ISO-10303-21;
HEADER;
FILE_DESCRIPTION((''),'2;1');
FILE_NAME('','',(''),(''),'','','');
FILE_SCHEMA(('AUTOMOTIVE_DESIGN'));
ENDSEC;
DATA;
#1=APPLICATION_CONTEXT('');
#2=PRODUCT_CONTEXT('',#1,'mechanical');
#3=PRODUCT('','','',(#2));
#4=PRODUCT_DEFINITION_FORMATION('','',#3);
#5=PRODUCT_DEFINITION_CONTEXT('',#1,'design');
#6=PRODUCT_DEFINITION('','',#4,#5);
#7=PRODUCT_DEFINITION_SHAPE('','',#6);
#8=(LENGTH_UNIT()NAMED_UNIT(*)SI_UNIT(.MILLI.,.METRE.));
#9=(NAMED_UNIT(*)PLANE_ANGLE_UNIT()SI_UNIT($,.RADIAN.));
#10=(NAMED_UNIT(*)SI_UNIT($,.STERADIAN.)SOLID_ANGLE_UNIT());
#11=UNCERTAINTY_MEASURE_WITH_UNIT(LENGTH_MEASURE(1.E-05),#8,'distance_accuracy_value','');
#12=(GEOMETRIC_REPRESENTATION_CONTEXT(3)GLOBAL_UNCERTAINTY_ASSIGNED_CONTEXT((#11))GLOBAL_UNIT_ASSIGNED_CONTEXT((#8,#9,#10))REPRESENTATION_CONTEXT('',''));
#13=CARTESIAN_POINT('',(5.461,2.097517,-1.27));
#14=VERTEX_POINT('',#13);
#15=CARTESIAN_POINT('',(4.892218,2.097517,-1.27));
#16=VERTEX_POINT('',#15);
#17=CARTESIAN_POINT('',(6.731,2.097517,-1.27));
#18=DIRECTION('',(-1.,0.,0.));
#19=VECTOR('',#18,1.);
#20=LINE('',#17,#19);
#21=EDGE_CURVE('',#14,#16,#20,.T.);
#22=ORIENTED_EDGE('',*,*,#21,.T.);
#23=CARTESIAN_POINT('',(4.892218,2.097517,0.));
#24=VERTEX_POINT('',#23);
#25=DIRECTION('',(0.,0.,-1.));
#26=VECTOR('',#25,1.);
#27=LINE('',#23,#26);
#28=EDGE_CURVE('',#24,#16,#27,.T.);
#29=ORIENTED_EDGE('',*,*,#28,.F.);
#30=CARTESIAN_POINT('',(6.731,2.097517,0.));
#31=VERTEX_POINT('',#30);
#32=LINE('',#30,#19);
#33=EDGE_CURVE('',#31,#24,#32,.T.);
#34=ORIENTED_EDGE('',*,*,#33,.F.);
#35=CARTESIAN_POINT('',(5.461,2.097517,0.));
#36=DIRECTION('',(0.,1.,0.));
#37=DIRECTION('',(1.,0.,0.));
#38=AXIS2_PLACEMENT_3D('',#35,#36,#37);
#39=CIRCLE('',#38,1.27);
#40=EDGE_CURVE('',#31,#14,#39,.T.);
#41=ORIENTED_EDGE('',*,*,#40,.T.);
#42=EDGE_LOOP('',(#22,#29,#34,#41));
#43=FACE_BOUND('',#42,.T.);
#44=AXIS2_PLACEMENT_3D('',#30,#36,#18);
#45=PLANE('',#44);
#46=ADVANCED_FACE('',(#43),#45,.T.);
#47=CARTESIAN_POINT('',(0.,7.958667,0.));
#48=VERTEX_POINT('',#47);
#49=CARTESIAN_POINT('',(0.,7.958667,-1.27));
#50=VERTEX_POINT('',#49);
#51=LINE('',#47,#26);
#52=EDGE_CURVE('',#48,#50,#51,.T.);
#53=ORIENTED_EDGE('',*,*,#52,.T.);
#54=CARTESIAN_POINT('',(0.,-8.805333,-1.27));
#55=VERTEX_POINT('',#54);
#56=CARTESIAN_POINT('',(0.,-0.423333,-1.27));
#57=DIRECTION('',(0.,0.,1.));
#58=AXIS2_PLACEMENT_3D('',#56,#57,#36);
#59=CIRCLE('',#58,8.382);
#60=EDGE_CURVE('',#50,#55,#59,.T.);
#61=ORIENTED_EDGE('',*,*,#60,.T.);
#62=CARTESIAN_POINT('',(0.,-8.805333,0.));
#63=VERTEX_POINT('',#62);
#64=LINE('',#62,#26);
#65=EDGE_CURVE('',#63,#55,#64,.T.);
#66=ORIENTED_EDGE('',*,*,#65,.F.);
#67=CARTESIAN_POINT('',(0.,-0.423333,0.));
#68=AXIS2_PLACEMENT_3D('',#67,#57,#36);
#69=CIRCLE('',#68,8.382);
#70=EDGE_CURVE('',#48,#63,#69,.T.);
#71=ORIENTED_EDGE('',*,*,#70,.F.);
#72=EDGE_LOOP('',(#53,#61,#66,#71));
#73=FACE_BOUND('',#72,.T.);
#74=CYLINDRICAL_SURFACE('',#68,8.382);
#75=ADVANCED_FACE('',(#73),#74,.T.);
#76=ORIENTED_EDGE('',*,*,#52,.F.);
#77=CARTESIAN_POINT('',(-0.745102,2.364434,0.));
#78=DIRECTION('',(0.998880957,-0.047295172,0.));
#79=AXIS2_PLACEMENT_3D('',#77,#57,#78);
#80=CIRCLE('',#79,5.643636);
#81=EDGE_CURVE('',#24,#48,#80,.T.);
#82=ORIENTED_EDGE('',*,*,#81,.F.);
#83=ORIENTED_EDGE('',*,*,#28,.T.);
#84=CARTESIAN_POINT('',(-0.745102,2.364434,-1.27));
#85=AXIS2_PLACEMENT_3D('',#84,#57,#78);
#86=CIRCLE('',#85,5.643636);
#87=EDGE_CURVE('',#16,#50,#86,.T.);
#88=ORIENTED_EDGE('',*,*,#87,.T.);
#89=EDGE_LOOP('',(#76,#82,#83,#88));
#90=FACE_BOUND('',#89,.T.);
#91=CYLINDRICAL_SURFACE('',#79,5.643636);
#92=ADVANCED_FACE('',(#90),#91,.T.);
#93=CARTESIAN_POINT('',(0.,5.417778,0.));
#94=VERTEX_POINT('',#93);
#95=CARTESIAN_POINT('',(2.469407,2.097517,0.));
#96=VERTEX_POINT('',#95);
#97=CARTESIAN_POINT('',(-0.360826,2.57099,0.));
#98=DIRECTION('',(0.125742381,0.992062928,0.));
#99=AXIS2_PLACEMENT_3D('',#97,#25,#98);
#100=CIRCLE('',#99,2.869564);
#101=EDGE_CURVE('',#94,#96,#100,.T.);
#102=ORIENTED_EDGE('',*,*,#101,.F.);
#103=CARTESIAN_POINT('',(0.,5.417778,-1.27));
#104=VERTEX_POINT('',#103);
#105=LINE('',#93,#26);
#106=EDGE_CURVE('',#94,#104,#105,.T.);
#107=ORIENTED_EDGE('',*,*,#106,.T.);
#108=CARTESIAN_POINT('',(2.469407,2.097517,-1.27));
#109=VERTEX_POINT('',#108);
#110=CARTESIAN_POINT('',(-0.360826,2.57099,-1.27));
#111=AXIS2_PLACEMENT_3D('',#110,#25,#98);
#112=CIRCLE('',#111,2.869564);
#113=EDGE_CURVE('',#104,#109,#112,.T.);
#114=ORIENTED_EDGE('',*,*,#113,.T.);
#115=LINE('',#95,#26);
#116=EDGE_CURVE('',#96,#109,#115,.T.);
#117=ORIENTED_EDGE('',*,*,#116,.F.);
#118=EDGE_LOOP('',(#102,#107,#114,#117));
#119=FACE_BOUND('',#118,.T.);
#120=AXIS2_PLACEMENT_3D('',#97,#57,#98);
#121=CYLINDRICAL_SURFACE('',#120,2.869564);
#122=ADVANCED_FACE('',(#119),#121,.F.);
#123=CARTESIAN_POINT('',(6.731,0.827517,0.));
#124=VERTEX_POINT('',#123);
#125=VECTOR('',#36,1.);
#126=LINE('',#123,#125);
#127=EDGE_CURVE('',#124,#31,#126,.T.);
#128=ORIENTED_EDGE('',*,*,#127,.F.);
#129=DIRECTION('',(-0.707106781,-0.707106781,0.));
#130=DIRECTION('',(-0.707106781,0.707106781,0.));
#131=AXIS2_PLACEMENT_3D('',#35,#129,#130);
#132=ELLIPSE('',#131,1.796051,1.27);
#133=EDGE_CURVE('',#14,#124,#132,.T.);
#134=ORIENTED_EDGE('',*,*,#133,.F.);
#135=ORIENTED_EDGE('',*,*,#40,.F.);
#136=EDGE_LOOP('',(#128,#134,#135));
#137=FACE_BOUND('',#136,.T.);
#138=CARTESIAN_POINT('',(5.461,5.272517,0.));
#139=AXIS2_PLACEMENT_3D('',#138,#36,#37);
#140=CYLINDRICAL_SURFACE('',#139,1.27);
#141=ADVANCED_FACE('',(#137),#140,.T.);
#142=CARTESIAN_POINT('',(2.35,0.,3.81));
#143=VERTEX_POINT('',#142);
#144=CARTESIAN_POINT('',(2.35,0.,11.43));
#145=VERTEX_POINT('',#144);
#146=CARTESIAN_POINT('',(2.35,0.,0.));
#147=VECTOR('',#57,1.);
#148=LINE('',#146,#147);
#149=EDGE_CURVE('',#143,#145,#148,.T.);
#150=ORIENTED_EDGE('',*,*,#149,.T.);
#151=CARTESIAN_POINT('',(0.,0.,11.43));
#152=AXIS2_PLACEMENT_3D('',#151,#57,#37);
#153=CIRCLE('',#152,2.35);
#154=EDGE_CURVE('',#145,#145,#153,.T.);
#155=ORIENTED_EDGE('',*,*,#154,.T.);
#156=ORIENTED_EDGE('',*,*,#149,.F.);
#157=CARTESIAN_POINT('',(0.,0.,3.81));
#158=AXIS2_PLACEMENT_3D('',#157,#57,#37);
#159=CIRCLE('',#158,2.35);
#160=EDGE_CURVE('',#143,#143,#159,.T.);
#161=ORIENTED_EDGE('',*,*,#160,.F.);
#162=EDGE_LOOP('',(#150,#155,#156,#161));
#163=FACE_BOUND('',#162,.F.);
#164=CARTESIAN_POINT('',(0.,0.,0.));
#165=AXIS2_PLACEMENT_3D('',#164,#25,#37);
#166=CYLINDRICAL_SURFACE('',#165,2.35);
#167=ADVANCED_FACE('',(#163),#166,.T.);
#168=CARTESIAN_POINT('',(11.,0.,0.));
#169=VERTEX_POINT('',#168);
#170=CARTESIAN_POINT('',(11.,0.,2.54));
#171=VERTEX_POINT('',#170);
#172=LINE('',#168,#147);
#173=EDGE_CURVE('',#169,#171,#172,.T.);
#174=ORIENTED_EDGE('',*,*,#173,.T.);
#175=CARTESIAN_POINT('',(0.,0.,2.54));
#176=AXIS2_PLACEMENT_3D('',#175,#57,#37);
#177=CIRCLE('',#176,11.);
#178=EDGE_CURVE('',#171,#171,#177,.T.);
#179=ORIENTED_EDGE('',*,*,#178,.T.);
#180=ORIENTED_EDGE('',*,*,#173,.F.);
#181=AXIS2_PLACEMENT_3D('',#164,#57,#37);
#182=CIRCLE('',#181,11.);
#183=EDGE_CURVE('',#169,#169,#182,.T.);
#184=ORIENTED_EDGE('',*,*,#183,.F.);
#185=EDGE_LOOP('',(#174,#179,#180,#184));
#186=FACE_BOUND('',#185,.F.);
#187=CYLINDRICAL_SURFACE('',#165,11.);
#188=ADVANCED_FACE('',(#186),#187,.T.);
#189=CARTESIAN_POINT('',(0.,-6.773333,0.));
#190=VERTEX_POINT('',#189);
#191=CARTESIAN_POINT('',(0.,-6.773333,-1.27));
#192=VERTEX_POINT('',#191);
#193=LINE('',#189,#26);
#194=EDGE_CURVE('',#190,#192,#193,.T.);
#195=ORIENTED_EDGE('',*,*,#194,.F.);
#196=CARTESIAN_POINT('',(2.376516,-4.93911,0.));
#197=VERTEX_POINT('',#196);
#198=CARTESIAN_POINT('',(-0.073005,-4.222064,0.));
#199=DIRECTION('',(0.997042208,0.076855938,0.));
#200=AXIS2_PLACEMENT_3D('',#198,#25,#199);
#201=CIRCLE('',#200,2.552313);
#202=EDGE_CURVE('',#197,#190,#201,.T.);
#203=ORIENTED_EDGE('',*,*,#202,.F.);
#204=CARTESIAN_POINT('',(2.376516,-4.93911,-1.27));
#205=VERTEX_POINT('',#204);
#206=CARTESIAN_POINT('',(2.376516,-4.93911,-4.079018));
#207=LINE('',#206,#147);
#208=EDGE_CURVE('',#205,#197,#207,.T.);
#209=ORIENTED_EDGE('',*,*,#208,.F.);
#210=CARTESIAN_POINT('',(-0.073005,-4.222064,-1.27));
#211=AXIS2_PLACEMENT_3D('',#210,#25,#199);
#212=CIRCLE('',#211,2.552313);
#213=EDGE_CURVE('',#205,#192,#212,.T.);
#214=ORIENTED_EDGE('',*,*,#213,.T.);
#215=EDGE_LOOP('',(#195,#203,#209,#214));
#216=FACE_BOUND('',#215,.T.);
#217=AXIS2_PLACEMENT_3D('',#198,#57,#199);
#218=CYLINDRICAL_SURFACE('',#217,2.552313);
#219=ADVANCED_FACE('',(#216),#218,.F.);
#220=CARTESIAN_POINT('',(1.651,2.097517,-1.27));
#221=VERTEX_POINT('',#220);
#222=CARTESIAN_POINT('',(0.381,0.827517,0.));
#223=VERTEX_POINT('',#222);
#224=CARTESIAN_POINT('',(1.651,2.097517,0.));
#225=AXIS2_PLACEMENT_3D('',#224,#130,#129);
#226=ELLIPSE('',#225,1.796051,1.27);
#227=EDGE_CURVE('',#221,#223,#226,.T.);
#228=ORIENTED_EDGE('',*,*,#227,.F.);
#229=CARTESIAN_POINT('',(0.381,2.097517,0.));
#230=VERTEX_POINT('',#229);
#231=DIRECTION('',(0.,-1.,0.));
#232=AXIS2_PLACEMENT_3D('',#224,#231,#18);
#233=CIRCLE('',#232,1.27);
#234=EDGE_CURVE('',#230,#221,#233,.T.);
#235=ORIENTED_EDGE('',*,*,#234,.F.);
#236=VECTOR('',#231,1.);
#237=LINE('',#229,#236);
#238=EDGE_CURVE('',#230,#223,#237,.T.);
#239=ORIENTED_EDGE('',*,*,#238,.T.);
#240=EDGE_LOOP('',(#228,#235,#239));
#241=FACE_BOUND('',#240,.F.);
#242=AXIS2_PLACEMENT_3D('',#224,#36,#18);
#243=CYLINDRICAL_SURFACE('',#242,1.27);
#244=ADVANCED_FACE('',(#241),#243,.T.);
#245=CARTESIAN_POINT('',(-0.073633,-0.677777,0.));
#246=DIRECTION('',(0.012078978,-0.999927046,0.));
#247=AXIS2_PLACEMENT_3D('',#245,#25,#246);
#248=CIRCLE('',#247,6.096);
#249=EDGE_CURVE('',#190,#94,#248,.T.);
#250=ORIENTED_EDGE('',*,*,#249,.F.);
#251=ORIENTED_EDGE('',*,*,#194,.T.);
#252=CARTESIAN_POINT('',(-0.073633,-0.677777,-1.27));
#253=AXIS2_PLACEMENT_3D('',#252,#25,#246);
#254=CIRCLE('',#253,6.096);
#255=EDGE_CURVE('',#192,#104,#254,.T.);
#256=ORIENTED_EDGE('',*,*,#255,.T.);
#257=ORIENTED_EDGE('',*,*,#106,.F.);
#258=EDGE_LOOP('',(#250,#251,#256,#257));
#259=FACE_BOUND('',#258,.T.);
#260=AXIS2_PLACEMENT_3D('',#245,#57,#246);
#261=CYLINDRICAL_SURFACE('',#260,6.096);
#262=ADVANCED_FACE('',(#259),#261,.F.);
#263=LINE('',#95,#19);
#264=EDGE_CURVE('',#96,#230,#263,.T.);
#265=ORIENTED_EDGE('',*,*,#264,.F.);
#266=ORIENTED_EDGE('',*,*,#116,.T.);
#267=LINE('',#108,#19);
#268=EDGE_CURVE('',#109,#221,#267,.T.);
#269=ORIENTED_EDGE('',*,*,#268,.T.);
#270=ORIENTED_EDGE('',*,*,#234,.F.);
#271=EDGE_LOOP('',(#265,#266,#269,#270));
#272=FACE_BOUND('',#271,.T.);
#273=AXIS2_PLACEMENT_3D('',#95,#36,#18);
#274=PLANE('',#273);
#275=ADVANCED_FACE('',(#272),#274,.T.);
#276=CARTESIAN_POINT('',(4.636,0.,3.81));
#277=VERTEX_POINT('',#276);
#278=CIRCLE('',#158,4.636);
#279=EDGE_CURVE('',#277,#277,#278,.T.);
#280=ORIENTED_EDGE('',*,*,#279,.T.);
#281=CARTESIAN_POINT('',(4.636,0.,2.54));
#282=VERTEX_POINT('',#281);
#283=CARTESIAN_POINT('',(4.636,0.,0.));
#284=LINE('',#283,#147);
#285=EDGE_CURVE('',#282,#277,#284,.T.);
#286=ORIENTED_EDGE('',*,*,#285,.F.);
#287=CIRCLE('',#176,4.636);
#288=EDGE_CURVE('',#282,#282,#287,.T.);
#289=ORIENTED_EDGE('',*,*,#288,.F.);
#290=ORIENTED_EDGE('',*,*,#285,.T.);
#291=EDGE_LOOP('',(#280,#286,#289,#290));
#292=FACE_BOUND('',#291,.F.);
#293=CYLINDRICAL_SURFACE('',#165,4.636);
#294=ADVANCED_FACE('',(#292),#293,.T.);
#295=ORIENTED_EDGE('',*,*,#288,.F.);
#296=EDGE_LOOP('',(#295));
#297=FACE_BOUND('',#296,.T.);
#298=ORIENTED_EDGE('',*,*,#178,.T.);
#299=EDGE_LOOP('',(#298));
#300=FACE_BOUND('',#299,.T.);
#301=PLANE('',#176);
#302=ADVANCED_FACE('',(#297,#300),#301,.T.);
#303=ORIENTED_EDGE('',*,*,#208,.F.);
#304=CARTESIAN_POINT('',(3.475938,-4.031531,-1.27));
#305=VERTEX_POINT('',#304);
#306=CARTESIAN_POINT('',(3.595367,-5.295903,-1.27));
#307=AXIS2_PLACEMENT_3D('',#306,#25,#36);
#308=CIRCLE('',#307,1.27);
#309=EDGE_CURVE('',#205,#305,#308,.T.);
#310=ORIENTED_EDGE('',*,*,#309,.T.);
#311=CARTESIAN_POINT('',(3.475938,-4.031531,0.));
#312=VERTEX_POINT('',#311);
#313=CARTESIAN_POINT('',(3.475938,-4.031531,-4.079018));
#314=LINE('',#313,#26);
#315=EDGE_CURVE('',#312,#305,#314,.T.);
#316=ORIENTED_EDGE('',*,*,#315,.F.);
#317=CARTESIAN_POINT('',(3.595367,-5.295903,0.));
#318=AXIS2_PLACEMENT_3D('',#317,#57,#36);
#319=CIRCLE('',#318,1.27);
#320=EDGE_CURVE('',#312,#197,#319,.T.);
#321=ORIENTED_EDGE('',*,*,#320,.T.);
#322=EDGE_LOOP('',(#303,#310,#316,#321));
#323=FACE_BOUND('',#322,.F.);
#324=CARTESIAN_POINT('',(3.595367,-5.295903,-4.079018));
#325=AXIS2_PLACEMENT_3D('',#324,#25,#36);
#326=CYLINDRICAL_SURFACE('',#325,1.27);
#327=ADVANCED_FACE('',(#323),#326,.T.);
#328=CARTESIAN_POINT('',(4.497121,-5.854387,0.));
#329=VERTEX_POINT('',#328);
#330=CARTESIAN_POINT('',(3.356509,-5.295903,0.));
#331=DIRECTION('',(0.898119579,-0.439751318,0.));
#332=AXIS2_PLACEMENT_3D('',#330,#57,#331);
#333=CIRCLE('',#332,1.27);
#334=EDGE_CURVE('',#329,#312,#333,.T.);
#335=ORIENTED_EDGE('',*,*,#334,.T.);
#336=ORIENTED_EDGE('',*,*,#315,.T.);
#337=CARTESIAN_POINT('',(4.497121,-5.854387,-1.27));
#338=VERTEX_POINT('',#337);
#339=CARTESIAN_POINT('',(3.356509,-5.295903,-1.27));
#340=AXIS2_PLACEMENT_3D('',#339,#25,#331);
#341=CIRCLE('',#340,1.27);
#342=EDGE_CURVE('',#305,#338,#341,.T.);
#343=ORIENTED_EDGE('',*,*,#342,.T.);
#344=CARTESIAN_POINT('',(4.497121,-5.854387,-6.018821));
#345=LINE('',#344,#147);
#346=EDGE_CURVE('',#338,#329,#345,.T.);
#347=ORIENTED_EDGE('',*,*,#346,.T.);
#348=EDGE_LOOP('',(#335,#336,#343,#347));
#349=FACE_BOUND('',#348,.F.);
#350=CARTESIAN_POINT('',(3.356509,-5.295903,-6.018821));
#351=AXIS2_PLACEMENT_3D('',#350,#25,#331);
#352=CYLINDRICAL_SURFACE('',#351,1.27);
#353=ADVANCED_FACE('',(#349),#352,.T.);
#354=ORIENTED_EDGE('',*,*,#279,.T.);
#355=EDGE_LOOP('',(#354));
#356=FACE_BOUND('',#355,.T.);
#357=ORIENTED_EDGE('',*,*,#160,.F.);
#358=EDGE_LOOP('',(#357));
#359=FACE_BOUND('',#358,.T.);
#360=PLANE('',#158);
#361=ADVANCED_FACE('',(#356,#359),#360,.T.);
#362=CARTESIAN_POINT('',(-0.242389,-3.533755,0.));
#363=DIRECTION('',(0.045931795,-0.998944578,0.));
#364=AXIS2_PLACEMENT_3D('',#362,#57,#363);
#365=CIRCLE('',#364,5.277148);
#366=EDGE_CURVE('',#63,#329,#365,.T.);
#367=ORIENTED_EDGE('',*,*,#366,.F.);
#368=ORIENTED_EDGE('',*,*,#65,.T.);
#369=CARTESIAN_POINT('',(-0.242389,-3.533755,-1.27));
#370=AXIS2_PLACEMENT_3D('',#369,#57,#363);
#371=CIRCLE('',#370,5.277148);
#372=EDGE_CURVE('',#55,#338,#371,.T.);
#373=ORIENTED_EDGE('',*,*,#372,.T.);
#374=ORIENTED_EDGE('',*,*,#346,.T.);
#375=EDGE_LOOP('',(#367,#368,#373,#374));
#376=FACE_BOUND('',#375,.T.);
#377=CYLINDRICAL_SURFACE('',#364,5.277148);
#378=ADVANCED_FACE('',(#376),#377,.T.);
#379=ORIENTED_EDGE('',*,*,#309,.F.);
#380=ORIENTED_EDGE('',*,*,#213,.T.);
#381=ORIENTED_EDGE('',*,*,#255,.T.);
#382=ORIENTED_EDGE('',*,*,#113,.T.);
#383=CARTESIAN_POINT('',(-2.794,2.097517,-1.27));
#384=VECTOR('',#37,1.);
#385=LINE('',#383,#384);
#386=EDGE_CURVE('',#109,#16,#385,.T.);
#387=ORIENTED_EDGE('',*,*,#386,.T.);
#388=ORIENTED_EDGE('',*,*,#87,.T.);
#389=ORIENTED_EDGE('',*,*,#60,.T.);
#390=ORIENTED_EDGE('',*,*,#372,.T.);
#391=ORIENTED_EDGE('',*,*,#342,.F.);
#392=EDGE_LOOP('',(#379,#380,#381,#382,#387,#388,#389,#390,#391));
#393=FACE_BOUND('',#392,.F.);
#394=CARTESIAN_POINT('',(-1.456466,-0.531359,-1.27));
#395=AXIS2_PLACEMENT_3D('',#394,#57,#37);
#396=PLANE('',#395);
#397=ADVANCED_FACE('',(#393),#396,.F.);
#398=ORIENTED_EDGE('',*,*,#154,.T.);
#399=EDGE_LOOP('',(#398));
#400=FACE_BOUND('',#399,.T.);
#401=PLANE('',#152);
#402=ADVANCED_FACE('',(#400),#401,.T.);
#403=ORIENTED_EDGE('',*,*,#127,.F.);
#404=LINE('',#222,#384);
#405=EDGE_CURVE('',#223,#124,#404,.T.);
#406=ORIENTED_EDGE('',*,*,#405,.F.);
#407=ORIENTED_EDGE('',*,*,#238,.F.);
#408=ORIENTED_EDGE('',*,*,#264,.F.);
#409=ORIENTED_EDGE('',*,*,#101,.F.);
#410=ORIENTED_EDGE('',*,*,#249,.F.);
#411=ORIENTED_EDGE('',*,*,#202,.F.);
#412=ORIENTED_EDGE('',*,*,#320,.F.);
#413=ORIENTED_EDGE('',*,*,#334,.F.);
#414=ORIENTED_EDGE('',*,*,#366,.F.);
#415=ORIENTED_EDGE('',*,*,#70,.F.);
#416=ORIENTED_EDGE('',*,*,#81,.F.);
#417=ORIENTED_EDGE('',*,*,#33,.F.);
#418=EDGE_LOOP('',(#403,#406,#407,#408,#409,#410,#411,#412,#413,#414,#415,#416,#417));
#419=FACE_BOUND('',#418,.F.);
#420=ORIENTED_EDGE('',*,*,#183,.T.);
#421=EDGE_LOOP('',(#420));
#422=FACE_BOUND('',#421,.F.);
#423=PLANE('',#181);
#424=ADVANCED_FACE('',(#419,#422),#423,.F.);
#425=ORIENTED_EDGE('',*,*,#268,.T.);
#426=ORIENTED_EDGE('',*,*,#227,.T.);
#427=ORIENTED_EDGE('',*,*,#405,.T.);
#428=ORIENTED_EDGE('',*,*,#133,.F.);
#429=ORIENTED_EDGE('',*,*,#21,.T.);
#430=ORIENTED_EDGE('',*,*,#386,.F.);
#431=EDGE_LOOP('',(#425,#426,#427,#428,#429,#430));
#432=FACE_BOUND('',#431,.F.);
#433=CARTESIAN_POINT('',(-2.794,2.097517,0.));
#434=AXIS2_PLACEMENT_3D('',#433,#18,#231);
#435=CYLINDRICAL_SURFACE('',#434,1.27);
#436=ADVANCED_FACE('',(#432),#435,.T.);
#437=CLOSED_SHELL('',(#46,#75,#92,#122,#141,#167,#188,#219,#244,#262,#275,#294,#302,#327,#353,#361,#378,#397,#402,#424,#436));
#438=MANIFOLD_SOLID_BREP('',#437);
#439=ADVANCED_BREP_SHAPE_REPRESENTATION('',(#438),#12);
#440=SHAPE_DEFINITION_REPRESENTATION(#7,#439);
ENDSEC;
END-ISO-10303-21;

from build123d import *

# Parameters (mm, degrees)
F0_R        = 2.35
F1_DEPTH    = 11.43
F0_R_2      = 4.636
F2_DEPTH    = 3.81
F0_R_3      = 11
F3_DEPTH    = 2.54
F5_DEPTH    = 1.27
F6_T1_DEPTH = 12.7
F6_T3_DEPTH = 7.62
F6_T5_DEPTH = 4.445
F6_T7_DEPTH = 4.079017898
F6_T9_DEPTH = 6.0188206533


# Not quite as in the source:
# - a fillet or chamfer that OpenCascade refuses, or shapes differently, is made with other operations: its cross-section is extruded or revolved along the edge and cut away or added


with BuildPart() as f1:
    # F0 (on Top) → F1 (new body)
    with BuildSketch(Plane.XY):
        Circle(F0_R)
    extrude(amount=F1_DEPTH)

    # F0 (on Top) → F2 (join)
    with BuildSketch(Plane.XY):
        Circle(F0_R_2)
        Circle(F0_R, mode=Mode.SUBTRACT)
    extrude(amount=F2_DEPTH)

    # F0 (on Top) → F3 (join)
    with BuildSketch(Plane.XY):
        Circle(F0_R_3)
        Circle(F0_R_2, mode=Mode.SUBTRACT)
    extrude(amount=F3_DEPTH)

    # F4 (on face) → F5 (join)
    with BuildSketch(Plane.XY):
        with BuildLine():
            ThreePointArc((0, -6.7733326328), (-6.1696334492, -0.6777773574), (0, 5.417777918))
            ThreePointArc((0, 5.417777918), (1.9417265012, 4.2834880284), (2.4694073737, 2.0975172472))
            Line((2.4694073737, 2.0975172472), (4.8922184175, 2.0975172472))
            ThreePointArc((4.8922184175, 2.0975172472), (3.5875761059, 5.9808584475), (0, 7.9586673672))
            ThreePointArc((0, 7.9586673672), (-8.382, -0.4233326328), (0, -8.8053326328))
            ThreePointArc((0, -8.8053326328), (3.39954986, -7.3527295439), (5.0117596984, -4.0259030648))
            Line((5.0117596984, -4.0259030648), (2.4717596984, -4.0259030648))
            ThreePointArc((2.4717596984, -4.0259030648), (1.8244333866, -5.9291174694), (0, -6.7733326328))
        make_face()
        with BuildLine():
            Line((4.8922184175, 2.0975172472), (2.4694073737, 2.0975172472))
            ThreePointArc((2.4694073737, 2.0975172472), (2.3960471942, 1.7747190007), (2.2859995271, 1.4625172472))
            Line((2.2859995271, 1.4625172472), (4.8259995271, 1.4625172472))
            ThreePointArc((4.8259995271, 1.4625172472), (4.8680955625, 1.7790801102), (4.8922184175, 2.0975172472))
        make_face()
        with BuildLine():
            ThreePointArc((2.2859995271, 1.4625172472), (2.3960471942, 1.7747190007), (2.4694073737, 2.0975172472))
            Line((2.4694073737, 2.0975172472), (0.3809995271, 2.0975172472))
            Line((0.3809995271, 2.0975172472), (0.3809995271, 0.8275172472))
            Line((0.3809995271, 0.8275172472), (6.7309995271, 0.8275172472))
            Line((6.7309995271, 0.8275172472), (6.7309995271, 2.0975172472))
            Line((6.7309995271, 2.0975172472), (4.8922184175, 2.0975172472))
            ThreePointArc((4.8922184175, 2.0975172472), (4.8680955625, 1.7790801102), (4.8259995271, 1.4625172472))
            Line((4.8259995271, 1.4625172472), (2.2859995271, 1.4625172472))
        make_face()
    extrude(amount=-F5_DEPTH)

    # F6: fillet of radius 1.27 on 5 edges, made by hand

    # F6_s2 → F6_t1 (cut)
    with BuildSketch(Plane.YZ.offset(-2.7940004729)):
        with BuildLine():
            ThreePointArc((0.8275172472, 0), (1.1994916351, -0.8980256121), (2.0975172472, -1.27))
            Line((2.0975172472, -1.27), (0.8275172472, -1.27))
            Line((0.8275172472, -1.27), (0.8275172472, 0))
        make_face()
    extrude(amount=F6_T1_DEPTH, mode=Mode.SUBTRACT)

    # F6_s4 → F6_t3 (cut)
    with BuildSketch(Plane.XZ.offset(-5.2725172472)):
        with BuildLine():
            ThreePointArc((6.7309995271, 0), (6.3590251392, -0.8980256121), (5.4609995271, -1.27))
            Line((5.4609995271, -1.27), (6.7309995271, -1.27))
            Line((6.7309995271, -1.27), (6.7309995271, 0))
        make_face()
    extrude(amount=F6_T3_DEPTH, mode=Mode.SUBTRACT)

    # F6_s6 → F6_t5 (cut)
    with BuildSketch(Plane.XZ.offset(-2.0975172472)):
        with BuildLine():
            ThreePointArc((0.3809995271, 0), (0.752973915, -0.8980256121), (1.6509995271, -1.27))
            Line((1.6509995271, -1.27), (0.3809995271, -1.27))
            Line((0.3809995271, -1.27), (0.3809995271, 0))
        make_face()
    extrude(amount=F6_T5_DEPTH, mode=Mode.SUBTRACT)

    # F6_s8 → F6_t7 (cut)
    with BuildSketch(Plane.XY.offset(-4.079017898)):
        with BuildLine():
            ThreePointArc((3.5953668576, -4.0259030648), (2.8338642738, -4.2795301928), (2.3765155692, -4.9391096556))
            ThreePointArc((2.3765155692, -4.9391096556), (2.4655394537, -4.4868244195), (2.4717596984, -4.0259030648))
            Line((2.4717596984, -4.0259030648), (3.5953668576, -4.0259030648))
        make_face()
    extrude(amount=F6_T7_DEPTH, mode=Mode.SUBTRACT)

    # F6_s10 → F6_t9 (cut)
    with BuildSketch(Plane.XY.offset(-6.0188206533)):
        with BuildLine():
            ThreePointArc((4.4971207542, -5.8543872382), (4.4340465678, -4.6237330343), (3.3565088886, -4.0259030648))
            Line((3.3565088886, -4.0259030648), (5.0117596984, -4.0259030648))
            ThreePointArc((5.0117596984, -4.0259030648), (4.837388646, -4.9634915319), (4.4971207542, -5.8543872382))
        make_face()
    extrude(amount=F6_T9_DEPTH, mode=Mode.SUBTRACT)


solid = f1.part
